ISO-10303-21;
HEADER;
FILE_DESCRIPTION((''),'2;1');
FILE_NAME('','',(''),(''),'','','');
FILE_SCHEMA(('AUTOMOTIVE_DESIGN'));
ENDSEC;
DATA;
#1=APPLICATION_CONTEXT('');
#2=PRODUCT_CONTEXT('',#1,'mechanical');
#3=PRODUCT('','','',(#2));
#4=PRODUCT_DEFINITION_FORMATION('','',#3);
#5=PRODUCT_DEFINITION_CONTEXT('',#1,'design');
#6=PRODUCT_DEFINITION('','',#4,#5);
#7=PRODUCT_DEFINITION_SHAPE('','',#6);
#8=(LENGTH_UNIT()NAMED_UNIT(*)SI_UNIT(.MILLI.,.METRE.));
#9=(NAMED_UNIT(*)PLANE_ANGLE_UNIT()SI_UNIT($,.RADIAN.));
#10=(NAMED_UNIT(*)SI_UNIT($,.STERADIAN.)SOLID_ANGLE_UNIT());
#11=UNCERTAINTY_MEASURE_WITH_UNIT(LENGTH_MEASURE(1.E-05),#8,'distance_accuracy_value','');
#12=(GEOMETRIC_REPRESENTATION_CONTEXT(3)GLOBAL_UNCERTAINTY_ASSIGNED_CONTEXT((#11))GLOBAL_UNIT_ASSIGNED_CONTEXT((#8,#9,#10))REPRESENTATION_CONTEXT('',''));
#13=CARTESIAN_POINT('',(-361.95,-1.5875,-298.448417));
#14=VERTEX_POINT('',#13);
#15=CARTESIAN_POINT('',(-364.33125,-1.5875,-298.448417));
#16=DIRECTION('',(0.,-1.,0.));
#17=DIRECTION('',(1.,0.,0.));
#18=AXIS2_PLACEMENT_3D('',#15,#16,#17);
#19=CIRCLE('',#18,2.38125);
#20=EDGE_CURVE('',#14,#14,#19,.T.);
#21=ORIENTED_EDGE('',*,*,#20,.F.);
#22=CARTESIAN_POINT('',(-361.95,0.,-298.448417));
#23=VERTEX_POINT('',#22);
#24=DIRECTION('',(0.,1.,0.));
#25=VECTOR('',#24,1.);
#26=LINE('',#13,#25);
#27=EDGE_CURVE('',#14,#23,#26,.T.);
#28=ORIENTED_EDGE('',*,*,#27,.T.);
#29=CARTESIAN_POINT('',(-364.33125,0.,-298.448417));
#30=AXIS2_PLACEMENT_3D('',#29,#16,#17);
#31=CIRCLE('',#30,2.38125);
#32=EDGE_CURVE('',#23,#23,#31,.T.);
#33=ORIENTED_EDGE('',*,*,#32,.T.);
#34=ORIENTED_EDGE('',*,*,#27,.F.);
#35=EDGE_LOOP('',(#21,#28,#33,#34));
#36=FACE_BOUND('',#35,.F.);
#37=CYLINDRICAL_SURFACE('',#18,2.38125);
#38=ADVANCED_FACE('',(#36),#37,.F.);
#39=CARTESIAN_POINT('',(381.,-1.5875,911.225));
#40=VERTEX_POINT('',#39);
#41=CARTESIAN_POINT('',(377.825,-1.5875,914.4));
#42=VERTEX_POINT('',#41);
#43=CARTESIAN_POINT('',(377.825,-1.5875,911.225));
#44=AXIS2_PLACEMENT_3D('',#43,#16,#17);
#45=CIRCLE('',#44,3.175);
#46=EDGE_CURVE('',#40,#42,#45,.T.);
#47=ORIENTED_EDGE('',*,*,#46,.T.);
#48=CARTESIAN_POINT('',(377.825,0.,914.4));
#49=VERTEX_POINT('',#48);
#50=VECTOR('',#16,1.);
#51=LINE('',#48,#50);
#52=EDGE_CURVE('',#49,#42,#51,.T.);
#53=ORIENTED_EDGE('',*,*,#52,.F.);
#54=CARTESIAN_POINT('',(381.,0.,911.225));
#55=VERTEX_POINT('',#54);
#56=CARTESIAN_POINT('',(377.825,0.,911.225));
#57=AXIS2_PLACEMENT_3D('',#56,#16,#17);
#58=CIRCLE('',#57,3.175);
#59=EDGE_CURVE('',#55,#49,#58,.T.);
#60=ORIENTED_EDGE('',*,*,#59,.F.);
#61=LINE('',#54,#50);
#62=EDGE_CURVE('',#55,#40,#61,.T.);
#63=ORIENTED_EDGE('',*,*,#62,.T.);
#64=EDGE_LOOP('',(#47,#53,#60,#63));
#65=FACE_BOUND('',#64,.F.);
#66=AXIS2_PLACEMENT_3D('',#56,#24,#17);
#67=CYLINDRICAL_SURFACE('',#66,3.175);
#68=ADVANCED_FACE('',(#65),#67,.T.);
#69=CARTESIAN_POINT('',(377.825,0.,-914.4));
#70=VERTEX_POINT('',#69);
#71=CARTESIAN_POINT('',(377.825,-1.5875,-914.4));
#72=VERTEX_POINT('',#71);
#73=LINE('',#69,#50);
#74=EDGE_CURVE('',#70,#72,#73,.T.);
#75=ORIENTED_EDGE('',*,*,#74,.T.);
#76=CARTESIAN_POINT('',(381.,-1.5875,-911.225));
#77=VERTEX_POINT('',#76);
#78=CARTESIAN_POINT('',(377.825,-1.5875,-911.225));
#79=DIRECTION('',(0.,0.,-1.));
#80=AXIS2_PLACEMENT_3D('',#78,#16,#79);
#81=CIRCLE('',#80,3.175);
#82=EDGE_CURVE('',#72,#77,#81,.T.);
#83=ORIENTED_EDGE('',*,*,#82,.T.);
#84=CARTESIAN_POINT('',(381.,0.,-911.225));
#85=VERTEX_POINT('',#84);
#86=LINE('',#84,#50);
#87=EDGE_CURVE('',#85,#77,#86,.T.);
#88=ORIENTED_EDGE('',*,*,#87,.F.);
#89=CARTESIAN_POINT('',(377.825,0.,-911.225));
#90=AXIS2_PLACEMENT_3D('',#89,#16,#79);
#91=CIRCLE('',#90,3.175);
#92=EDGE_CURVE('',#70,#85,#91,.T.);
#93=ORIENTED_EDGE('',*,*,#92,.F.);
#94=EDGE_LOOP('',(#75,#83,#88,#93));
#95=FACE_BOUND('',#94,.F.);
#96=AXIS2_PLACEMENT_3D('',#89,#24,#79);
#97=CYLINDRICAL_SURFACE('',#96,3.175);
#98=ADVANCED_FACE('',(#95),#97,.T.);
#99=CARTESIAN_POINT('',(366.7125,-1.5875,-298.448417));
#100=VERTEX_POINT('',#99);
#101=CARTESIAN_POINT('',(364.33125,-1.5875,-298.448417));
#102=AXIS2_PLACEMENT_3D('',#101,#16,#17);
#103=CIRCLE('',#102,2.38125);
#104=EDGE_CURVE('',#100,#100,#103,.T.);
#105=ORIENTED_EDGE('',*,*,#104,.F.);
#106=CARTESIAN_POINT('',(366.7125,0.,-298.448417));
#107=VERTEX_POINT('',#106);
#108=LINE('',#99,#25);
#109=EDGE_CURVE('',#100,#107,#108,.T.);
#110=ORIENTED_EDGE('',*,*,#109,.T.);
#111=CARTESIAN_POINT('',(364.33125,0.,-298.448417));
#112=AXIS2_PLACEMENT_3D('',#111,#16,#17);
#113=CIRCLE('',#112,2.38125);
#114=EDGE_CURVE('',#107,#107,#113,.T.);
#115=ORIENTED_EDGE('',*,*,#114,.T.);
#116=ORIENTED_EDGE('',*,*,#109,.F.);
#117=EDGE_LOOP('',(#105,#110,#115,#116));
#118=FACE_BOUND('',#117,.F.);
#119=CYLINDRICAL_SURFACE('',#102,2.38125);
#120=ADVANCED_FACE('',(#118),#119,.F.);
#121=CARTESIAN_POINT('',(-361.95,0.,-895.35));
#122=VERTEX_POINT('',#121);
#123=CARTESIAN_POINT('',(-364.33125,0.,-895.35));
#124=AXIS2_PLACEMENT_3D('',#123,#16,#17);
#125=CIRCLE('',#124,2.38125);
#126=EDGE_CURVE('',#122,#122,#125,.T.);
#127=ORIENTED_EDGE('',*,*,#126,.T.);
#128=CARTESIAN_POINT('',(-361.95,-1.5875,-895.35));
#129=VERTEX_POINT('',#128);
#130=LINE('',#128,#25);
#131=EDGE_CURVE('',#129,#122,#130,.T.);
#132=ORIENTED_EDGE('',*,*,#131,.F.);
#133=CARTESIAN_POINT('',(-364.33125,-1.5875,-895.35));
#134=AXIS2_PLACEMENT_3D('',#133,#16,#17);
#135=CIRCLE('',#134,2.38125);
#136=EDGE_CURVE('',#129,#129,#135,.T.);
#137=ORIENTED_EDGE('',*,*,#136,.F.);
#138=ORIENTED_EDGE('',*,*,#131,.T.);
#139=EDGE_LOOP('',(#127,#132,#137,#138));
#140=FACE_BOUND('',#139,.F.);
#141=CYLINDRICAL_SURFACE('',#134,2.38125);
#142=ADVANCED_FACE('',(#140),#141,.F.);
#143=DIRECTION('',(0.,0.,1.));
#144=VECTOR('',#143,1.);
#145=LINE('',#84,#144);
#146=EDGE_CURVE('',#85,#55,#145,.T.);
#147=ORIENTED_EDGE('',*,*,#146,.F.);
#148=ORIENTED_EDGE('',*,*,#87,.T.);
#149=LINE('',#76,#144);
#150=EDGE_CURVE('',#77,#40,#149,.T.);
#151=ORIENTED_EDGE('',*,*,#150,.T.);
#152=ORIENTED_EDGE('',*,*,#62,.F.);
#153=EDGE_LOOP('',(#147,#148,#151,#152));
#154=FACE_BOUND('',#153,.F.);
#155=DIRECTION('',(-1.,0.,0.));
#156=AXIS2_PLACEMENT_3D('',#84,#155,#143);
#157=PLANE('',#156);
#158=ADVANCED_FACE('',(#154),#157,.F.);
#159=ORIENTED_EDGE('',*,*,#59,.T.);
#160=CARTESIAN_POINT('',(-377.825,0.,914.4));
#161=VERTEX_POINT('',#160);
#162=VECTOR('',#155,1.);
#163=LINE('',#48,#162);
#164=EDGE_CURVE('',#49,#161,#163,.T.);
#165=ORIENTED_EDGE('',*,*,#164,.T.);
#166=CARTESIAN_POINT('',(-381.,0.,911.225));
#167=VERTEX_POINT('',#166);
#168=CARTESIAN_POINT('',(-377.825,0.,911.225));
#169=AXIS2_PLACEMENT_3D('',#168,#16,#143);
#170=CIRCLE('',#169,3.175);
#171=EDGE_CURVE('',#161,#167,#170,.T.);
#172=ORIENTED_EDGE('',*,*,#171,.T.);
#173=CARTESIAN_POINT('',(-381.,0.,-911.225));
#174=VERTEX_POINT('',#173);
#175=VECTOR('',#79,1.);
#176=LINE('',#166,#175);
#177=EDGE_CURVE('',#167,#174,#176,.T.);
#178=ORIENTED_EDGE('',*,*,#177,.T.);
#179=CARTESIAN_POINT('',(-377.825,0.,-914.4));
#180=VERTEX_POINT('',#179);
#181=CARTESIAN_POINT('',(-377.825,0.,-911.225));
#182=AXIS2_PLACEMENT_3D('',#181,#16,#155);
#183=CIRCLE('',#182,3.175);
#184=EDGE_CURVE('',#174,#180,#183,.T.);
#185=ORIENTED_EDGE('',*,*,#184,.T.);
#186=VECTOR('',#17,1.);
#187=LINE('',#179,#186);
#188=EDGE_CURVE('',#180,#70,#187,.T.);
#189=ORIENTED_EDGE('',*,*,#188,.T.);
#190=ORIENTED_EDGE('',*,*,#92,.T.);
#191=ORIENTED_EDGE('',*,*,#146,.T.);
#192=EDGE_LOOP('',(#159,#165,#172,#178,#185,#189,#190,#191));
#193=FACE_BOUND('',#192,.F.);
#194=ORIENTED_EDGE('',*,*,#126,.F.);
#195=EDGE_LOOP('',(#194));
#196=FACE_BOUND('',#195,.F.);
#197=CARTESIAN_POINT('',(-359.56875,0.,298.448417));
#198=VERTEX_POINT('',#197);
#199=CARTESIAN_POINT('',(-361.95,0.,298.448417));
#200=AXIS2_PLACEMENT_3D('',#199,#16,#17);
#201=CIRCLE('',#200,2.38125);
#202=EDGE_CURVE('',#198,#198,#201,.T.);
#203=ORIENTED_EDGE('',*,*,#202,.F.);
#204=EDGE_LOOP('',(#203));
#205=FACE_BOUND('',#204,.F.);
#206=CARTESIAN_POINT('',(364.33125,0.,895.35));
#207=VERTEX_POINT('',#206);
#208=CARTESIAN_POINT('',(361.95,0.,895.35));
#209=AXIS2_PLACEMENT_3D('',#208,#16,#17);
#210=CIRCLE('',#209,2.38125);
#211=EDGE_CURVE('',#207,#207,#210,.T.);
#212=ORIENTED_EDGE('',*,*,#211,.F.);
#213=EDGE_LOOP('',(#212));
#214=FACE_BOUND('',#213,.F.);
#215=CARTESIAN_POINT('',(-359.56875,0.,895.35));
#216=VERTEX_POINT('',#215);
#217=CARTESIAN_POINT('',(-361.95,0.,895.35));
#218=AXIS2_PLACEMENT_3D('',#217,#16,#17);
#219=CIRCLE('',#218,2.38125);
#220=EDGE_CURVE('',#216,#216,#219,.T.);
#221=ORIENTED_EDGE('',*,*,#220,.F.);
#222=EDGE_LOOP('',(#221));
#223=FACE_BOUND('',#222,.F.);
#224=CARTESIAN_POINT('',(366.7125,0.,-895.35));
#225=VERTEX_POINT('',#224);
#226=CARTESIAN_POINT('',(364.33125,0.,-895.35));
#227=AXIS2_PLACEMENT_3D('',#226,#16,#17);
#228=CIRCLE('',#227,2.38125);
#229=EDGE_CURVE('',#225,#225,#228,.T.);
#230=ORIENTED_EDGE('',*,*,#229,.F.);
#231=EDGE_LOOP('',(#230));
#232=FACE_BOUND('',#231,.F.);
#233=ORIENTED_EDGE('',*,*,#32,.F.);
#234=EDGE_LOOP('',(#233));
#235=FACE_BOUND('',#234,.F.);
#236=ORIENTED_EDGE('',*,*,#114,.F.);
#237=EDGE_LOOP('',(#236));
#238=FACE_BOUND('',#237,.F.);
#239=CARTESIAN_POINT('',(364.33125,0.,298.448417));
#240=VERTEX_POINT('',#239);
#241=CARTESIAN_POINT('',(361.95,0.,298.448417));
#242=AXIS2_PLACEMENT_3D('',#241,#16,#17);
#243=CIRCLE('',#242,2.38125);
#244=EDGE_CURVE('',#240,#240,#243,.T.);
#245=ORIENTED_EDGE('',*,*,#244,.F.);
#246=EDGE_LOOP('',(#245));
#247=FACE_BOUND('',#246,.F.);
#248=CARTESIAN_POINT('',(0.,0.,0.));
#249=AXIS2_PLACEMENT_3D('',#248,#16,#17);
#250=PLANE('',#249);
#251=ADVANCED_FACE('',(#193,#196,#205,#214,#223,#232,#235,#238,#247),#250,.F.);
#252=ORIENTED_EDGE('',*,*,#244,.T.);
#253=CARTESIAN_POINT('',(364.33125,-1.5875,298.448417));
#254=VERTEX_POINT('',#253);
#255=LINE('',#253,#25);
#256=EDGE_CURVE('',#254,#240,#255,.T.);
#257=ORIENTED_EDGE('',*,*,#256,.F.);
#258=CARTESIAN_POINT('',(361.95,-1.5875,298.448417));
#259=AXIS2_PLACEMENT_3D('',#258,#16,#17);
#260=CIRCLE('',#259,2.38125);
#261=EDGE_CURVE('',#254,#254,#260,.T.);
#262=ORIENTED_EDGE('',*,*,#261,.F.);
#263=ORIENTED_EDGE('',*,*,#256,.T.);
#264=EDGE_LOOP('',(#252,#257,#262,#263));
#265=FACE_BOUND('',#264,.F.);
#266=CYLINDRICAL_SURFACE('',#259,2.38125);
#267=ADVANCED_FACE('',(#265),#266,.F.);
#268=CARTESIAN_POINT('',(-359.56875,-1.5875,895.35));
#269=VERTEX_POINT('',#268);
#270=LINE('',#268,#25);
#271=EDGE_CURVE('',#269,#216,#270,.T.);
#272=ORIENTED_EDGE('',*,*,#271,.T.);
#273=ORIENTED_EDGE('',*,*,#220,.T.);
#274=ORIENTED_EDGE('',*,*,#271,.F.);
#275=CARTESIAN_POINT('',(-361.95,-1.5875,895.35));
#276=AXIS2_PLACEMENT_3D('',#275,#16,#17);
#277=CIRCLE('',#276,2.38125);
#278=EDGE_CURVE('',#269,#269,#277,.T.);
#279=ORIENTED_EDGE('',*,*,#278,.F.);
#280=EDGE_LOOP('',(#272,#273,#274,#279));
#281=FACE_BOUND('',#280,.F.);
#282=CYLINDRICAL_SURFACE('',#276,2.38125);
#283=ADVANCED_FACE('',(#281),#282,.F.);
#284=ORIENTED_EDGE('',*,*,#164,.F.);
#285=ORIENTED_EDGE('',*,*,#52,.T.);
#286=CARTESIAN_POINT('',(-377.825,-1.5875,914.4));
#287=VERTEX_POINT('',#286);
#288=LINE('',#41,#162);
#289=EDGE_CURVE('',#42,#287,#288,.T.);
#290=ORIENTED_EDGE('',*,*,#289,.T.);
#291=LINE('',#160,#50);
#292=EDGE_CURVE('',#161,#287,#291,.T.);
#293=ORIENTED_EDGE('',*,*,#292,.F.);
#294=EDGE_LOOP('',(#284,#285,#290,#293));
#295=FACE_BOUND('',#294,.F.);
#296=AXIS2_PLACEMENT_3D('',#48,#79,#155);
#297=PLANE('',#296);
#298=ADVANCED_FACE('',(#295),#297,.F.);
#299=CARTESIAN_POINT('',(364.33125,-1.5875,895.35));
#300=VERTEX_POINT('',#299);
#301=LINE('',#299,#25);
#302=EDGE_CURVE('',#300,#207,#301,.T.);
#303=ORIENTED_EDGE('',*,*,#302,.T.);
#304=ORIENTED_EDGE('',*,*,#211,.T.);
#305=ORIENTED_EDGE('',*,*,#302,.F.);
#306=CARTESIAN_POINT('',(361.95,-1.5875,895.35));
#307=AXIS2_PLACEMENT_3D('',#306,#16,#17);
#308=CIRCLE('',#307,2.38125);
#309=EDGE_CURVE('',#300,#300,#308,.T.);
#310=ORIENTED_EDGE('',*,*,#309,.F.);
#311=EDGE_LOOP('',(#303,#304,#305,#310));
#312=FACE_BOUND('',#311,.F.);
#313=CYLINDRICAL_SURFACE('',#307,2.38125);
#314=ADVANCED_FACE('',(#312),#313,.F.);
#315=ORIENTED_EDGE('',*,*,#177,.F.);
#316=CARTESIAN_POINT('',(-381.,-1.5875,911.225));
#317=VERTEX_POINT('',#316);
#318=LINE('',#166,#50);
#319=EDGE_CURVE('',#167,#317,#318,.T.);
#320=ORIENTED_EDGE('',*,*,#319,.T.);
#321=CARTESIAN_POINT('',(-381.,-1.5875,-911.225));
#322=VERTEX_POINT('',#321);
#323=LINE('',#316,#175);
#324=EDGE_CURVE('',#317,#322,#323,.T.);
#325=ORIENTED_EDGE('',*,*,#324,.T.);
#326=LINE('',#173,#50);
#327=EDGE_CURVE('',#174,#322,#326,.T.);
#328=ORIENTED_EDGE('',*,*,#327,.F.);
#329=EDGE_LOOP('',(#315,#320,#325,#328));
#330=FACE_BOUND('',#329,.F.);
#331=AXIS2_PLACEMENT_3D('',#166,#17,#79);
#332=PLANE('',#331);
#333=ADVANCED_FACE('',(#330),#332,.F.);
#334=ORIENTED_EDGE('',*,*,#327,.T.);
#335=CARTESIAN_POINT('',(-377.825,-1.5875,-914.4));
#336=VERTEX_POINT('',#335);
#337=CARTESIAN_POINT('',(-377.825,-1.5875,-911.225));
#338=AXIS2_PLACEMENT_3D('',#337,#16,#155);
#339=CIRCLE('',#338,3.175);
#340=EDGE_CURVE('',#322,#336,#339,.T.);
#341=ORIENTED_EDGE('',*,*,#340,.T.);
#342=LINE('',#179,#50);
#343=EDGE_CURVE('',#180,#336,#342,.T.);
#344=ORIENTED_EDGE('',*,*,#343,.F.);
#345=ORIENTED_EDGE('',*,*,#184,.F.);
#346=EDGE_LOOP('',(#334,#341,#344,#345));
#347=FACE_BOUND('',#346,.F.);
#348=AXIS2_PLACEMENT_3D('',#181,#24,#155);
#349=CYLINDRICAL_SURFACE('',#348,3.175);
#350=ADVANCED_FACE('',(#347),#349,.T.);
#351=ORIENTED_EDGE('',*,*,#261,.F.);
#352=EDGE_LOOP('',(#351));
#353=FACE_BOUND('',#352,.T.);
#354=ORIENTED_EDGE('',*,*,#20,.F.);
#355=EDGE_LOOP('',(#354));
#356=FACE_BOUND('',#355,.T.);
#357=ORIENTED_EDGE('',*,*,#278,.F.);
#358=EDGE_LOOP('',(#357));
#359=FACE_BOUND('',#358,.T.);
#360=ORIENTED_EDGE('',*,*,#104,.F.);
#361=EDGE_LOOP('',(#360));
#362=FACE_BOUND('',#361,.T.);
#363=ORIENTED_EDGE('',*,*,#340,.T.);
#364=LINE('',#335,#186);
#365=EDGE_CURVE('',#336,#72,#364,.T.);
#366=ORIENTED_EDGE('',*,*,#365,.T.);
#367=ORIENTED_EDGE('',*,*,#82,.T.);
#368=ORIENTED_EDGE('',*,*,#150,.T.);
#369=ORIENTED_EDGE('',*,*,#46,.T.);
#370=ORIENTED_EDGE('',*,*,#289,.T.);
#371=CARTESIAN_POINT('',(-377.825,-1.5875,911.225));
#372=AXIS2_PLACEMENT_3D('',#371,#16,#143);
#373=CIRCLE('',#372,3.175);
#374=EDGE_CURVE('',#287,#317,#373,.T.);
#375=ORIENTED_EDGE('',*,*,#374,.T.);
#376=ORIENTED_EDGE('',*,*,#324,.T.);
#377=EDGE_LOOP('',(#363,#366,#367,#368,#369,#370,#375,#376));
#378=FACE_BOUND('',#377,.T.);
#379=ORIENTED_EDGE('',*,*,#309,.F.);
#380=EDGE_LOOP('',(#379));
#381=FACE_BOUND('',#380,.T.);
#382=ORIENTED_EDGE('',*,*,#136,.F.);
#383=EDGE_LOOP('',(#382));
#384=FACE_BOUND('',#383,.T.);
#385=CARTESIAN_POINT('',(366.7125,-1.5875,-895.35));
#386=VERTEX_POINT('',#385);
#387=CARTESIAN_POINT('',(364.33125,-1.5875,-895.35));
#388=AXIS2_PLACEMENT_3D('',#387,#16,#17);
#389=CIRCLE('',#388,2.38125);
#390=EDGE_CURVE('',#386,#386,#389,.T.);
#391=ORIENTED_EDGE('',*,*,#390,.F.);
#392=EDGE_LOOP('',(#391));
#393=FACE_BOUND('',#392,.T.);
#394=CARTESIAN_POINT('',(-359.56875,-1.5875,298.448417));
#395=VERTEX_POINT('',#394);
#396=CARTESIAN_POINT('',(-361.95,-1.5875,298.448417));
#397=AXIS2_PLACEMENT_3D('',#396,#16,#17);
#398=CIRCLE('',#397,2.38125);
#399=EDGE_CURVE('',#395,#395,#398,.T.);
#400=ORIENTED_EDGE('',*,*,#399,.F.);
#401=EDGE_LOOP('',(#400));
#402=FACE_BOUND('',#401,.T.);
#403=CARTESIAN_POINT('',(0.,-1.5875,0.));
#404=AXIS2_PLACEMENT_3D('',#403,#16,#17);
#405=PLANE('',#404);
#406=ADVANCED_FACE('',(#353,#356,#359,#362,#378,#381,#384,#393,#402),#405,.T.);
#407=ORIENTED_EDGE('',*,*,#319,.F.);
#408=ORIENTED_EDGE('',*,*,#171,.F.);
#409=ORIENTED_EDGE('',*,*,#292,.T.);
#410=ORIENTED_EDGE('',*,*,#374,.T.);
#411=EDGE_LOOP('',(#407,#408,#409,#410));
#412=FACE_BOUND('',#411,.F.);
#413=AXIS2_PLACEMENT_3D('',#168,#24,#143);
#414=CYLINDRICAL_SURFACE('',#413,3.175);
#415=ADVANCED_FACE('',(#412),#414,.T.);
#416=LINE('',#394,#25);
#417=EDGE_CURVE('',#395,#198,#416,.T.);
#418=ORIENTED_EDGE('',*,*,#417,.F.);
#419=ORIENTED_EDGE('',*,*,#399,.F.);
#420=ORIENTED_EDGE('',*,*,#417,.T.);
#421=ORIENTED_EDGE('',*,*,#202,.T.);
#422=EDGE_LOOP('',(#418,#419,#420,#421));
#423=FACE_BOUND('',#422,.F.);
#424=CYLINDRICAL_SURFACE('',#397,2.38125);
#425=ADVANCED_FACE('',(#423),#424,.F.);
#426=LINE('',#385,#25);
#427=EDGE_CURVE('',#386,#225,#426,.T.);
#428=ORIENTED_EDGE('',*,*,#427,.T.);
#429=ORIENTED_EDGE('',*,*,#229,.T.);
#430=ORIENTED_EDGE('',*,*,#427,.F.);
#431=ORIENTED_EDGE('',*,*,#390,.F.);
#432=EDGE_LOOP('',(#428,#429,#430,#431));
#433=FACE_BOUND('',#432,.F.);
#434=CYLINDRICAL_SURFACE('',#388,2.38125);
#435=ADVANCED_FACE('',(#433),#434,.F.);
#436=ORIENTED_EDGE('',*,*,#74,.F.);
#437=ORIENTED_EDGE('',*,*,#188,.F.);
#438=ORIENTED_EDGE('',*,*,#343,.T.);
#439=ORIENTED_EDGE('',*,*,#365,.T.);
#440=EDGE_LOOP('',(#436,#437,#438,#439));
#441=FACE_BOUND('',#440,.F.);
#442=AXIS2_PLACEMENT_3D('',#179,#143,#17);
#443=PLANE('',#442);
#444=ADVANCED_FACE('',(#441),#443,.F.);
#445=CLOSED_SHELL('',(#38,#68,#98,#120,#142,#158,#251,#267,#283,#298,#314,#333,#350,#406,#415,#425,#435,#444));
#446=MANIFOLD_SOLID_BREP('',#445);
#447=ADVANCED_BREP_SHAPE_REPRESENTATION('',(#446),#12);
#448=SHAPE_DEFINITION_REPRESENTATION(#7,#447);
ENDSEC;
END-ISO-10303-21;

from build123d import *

# Parameters (mm, degrees)
F1_DEPTH = 1.5875
F2_R     = 2.38125
F3_DEPTH = 1.5885


# Not quite as in the source:
# - a length typed as a fraction of an inch, garbled in the dataset ("3 / 203.2 mm" for 3/8 in), is restored


with BuildPart() as f1:
    # F0 (on Front) → F1 (new body)
    with BuildSketch(Plane.XZ):
        with BuildLine():
            Line((-377.825, -914.4), (377.825, -914.4))
            ThreePointArc((377.825, -914.4), (380.0700640303, -913.4700640303), (381, -911.225))
            Line((381, -911.225), (381, 911.225))
            ThreePointArc((381, 911.225), (380.0700640303, 913.4700640303), (377.825, 914.4))
            Line((377.825, 914.4), (-377.825, 914.4))
            ThreePointArc((-377.825, 914.4), (-380.0700640303, 913.4700640303), (-381, 911.225))
            Line((-381, 911.225), (-381, -911.225))
            ThreePointArc((-381, -911.225), (-380.0700640303, -913.4700640303), (-377.825, -914.4))
        make_face()
    extrude(amount=F1_DEPTH)

    # F2 (on face) → F3 (cut, through all)
    with BuildSketch(Plane.XZ.offset(1.5875)):
        with Locations((-361.95, 895.35)):
            Circle(F2_R)
        with Locations((-361.95, 298.44841672)):
            Circle(F2_R)
        with Locations((-364.33125, -298.44841672)):
            Circle(F2_R)
        with Locations((-364.33125, -895.35)):
            Circle(F2_R)
        with Locations((361.95, 895.35)):
            Circle(F2_R)
        with Locations((364.33125, -895.35)):
            Circle(F2_R)
        with Locations((361.95, 298.44841672)):
            Circle(F2_R)
        with Locations((364.33125, -298.44841672)):
            Circle(F2_R)
    extrude(amount=-F3_DEPTH, mode=Mode.SUBTRACT)


solid = f1.part
